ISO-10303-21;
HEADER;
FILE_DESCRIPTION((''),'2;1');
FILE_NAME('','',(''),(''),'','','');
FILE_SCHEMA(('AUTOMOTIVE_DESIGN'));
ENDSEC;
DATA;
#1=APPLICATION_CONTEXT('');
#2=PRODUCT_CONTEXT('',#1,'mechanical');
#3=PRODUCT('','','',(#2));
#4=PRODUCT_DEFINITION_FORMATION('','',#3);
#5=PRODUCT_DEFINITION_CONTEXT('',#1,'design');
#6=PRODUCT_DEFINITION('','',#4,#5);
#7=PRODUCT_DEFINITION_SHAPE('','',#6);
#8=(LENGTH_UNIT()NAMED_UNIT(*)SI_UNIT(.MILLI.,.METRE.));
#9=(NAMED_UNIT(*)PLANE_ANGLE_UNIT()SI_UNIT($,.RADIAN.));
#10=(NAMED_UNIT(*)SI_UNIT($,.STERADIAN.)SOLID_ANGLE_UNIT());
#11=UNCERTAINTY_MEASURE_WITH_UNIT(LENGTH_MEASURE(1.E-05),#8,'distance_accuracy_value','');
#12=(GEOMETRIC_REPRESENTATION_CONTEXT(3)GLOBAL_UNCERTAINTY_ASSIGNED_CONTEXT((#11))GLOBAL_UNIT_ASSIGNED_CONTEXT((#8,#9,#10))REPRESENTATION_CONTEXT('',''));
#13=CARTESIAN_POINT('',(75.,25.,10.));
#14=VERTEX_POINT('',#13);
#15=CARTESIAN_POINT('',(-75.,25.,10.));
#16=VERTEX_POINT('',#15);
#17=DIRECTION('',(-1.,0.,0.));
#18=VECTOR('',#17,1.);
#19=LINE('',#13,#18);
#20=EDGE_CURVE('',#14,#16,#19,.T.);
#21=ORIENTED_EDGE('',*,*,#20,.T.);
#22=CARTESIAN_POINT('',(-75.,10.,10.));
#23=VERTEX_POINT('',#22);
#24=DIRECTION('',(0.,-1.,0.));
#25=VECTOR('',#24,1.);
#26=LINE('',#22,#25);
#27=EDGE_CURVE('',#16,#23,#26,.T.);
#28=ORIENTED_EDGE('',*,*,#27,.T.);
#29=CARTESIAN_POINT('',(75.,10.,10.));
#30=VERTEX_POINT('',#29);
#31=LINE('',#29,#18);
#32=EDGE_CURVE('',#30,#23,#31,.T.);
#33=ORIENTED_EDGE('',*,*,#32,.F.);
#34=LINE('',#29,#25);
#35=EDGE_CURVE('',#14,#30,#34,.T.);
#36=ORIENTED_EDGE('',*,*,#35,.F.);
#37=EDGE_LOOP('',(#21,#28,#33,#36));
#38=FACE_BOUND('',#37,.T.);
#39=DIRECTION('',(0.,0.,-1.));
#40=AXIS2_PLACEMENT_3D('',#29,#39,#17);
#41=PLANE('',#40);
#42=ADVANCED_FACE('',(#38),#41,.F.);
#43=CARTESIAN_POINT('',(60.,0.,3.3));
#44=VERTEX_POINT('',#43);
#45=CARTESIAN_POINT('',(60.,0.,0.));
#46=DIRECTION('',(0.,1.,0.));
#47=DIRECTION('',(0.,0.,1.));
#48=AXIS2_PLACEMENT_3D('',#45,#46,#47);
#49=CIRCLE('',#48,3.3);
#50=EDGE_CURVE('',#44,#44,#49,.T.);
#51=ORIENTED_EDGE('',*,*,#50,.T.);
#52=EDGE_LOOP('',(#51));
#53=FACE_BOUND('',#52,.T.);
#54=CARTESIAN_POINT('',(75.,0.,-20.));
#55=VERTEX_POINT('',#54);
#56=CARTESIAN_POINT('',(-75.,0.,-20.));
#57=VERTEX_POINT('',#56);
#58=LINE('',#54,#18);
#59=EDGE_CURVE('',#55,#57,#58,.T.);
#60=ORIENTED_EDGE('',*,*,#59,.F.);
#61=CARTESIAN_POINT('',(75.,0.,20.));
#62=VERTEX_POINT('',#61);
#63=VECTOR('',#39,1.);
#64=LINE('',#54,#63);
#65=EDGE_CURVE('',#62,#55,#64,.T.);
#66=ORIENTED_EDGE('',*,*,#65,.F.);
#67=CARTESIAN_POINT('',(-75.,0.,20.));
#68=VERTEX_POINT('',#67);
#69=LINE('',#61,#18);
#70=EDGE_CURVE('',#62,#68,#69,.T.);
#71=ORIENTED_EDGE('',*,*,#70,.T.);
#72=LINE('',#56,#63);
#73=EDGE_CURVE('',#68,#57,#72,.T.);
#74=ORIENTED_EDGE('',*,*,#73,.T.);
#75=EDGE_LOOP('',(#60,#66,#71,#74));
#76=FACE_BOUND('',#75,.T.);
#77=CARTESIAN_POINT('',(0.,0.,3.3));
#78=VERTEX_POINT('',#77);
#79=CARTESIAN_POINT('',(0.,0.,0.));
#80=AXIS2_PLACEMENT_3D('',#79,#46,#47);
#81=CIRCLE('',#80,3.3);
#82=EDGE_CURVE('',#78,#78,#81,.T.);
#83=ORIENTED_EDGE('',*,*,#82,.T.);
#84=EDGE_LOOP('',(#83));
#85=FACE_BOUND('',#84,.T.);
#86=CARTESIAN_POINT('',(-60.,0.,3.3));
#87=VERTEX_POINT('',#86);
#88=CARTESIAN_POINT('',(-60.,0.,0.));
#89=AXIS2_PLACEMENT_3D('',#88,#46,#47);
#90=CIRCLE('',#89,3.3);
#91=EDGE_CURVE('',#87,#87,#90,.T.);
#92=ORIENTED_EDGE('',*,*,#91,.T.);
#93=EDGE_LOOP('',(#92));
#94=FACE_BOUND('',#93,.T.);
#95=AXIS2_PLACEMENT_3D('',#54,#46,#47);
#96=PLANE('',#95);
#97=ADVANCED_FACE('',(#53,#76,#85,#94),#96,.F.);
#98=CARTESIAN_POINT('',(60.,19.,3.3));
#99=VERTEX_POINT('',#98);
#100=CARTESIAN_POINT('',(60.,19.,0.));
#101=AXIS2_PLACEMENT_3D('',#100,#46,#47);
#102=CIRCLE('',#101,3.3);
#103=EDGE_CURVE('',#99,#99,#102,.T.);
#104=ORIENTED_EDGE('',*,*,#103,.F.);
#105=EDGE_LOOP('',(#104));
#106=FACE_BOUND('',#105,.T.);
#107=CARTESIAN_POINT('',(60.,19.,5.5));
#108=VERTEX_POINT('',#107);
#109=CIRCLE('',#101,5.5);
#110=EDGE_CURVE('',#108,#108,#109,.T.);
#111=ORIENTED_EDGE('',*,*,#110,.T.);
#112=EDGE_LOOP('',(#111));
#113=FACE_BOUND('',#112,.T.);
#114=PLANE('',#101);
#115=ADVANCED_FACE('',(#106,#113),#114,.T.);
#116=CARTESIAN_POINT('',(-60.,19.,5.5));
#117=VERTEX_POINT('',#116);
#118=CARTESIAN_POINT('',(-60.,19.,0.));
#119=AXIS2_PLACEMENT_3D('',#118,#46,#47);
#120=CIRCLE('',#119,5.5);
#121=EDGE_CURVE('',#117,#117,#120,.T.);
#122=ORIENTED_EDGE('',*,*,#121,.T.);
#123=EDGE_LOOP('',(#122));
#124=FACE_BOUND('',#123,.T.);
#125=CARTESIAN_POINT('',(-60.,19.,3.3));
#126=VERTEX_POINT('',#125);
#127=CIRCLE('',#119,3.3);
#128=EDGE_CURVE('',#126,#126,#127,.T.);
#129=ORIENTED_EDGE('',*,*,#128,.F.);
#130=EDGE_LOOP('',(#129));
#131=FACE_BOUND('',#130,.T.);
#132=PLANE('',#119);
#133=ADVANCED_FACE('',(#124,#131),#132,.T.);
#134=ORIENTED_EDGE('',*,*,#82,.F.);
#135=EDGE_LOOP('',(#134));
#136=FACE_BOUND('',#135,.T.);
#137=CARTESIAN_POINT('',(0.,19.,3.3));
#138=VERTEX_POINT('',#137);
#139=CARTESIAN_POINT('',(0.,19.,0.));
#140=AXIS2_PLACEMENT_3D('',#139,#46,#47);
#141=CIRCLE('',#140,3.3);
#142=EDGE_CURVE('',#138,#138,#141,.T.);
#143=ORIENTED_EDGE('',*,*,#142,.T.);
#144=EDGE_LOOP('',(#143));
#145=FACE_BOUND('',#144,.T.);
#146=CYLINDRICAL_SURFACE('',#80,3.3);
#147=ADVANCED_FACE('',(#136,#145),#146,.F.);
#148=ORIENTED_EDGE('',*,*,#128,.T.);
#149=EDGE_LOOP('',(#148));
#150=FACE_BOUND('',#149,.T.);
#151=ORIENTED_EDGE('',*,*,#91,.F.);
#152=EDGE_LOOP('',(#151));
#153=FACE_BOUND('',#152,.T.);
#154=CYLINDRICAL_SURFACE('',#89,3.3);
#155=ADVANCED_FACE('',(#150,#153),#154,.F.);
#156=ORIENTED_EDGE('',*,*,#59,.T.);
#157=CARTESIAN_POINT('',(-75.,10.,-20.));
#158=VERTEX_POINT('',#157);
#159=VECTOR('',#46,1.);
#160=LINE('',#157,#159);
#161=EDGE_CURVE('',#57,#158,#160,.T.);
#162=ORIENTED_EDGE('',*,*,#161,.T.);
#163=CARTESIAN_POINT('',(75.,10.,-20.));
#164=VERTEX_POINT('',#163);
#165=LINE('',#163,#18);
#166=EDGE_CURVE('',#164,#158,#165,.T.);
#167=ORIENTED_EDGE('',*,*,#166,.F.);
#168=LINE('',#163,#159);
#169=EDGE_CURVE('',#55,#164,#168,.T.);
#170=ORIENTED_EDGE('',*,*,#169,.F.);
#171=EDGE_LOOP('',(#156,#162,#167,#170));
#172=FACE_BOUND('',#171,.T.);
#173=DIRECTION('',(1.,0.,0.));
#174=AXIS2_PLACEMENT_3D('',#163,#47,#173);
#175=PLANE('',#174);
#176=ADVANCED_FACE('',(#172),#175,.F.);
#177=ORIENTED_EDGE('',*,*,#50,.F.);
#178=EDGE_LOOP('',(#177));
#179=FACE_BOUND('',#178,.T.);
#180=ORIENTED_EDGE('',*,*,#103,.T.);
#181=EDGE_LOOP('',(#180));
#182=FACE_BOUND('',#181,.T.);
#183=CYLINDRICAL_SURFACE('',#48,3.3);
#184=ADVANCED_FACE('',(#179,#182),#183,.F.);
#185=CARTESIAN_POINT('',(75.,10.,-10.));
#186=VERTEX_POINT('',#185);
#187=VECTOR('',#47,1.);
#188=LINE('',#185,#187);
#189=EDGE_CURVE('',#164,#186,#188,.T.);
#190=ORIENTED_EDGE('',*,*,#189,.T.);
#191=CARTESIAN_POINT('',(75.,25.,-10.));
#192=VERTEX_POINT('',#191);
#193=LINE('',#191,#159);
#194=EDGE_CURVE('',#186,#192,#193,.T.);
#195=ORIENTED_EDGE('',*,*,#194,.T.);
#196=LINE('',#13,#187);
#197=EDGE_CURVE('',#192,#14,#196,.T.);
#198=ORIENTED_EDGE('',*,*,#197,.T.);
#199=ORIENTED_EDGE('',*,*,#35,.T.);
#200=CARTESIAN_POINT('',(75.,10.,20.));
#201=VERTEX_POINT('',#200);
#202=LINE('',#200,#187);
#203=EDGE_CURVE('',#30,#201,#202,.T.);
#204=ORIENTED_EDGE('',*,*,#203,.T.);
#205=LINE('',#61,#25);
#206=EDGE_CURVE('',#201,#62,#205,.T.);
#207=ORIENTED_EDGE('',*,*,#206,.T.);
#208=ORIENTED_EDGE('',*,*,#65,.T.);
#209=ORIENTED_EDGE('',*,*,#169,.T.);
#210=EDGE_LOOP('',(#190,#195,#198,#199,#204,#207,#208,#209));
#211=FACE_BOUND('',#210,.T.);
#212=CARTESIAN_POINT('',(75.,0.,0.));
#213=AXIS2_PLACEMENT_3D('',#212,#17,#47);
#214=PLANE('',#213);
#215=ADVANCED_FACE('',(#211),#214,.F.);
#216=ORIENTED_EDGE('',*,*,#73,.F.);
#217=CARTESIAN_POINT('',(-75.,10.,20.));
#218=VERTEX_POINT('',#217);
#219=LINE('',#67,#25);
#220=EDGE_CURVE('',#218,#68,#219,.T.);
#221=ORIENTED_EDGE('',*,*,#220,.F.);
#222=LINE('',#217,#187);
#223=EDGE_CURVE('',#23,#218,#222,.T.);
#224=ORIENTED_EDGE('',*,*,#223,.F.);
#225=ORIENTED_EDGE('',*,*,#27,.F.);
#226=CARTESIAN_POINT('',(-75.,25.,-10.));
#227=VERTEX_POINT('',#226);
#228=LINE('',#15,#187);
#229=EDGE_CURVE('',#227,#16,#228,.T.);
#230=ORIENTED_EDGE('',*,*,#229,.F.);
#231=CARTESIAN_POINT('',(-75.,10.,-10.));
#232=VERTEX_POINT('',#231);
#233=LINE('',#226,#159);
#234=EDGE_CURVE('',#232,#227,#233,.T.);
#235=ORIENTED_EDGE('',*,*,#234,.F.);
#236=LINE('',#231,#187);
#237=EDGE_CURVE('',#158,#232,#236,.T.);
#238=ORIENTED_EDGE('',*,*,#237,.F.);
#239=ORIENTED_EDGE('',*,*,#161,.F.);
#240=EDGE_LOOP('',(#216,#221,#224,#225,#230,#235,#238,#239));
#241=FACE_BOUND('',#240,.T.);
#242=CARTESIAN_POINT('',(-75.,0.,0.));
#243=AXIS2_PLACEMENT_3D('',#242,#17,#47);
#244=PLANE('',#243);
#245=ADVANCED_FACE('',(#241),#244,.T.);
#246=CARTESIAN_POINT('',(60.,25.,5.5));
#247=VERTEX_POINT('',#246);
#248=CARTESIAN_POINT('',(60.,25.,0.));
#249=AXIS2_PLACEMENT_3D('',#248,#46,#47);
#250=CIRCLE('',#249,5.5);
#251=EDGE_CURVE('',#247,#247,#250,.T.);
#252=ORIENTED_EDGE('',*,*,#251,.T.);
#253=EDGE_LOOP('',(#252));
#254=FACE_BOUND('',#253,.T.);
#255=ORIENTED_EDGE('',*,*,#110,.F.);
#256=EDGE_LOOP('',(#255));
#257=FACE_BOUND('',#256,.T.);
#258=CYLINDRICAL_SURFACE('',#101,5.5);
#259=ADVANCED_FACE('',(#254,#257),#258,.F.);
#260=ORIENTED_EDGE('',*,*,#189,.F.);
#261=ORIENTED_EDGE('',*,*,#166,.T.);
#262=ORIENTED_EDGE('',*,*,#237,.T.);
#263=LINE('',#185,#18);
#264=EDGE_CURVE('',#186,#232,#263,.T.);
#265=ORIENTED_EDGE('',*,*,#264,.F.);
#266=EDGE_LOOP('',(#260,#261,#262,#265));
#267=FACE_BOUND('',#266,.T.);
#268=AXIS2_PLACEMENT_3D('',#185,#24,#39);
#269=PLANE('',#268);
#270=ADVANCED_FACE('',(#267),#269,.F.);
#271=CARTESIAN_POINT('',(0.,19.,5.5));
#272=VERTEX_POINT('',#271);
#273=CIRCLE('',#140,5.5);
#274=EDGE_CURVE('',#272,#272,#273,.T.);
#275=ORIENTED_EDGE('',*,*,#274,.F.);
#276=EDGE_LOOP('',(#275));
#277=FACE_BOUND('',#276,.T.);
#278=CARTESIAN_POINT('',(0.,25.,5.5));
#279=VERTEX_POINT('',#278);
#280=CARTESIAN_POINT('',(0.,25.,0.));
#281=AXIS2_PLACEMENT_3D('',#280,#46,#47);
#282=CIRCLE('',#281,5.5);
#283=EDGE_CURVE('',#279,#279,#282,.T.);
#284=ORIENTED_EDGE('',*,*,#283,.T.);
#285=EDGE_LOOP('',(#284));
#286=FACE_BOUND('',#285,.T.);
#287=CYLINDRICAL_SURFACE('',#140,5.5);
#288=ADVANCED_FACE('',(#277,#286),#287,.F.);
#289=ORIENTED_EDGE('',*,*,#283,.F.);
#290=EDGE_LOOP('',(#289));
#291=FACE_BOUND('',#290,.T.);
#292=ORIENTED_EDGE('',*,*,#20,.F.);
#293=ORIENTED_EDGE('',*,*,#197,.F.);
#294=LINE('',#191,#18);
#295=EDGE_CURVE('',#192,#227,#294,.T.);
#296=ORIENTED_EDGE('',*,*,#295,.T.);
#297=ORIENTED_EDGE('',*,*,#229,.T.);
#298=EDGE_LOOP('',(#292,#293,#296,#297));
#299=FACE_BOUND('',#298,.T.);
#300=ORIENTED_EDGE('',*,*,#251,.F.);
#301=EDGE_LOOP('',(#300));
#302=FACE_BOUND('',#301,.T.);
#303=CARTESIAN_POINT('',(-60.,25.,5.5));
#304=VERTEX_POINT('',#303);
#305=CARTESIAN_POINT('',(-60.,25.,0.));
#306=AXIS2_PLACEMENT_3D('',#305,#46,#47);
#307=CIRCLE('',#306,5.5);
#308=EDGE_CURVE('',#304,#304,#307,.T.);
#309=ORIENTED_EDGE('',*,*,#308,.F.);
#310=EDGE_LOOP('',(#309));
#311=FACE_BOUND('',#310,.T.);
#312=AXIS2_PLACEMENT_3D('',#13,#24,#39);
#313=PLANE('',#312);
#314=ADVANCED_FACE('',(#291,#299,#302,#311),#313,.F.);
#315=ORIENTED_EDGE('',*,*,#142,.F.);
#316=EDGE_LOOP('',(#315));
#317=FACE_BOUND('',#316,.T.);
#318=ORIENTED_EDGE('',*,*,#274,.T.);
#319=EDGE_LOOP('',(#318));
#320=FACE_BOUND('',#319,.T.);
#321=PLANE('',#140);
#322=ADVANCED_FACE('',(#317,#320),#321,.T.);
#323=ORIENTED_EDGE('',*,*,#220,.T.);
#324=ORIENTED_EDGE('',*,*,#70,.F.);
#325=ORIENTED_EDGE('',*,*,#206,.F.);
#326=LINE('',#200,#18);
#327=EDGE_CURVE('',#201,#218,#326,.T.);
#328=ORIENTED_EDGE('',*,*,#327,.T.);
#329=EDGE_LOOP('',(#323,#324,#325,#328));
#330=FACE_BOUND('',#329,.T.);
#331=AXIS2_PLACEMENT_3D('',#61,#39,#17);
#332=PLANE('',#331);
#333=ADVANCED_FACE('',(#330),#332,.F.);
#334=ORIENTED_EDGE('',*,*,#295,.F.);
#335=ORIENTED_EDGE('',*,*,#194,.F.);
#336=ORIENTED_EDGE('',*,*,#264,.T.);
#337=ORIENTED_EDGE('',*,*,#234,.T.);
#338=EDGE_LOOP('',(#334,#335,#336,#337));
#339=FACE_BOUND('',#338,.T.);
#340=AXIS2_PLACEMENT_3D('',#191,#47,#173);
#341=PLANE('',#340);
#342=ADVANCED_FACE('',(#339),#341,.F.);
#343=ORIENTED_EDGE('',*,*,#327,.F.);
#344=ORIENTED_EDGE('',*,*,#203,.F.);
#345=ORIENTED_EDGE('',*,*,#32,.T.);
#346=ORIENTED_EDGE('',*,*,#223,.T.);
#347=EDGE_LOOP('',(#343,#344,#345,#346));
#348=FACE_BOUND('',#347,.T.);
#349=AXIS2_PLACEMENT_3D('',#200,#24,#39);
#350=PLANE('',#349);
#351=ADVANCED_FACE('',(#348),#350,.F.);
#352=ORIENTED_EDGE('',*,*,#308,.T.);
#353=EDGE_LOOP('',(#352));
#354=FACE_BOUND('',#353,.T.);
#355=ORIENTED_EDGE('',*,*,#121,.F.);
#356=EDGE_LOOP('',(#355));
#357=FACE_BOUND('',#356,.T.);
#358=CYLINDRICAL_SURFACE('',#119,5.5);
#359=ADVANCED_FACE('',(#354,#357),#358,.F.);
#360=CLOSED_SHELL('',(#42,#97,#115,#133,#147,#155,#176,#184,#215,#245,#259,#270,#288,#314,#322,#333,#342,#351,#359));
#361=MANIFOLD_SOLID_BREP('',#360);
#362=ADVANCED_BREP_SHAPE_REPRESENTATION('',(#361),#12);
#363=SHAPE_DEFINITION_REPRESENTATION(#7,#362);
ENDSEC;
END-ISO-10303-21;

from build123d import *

# Parameters (mm, degrees)
EXTRUDE_START       = -75
EXTRUDE_1_DEPTH     = 150
SKETCH_2_R          = 5.5
CUT_EXTRUDE_1_DEPTH = 6
SKETCH_3_R          = 3.3
CUT_EXTRUDE_2_DEPTH = 82.547532152


# Read off the part's stored shape, not the designer's step: 凸台-拉伸1
with BuildPart() as part:
    # 凸台-拉伸1 outline → 凸台-拉伸1 (new body)
    with BuildSketch(Plane(origin=(0, 0, 0), x_dir=(0, 0, -1), z_dir=(1, 0, 0)).offset(EXTRUDE_START)):
        Polygon((20, 0), (20, 10), (10, 10), (10, 25), (-10, 25), (-10, 10), (-20, 10), (-20, 0), align=None)
    extrude(amount=EXTRUDE_1_DEPTH)

    # 草图2 → 切除-拉伸1 (cut)
    with BuildSketch(Plane(origin=(0, 25, 0), x_dir=(1, 0, 0), z_dir=(0, 1, 0))):
        with Locations(Location((-60, 0, 0), (0, 0, 270))):
            Circle(SKETCH_2_R)
        with Locations(Location((0, 0, 0), (0, 0, 270))):
            Circle(SKETCH_2_R)
        with Locations(Location((60, 0, 0), (0, 0, 270))):
            Circle(SKETCH_2_R)
    extrude(amount=-CUT_EXTRUDE_1_DEPTH, mode=Mode.SUBTRACT)

    # 草图3 → 切除-拉伸2 (cut, through all)
    with BuildSketch(Plane(origin=(0, 25, 0), x_dir=(1, 0, 0), z_dir=(0, 1, 0))):
        with Locations(Location((-60, 0, 0), (0, 0, 270))):
            Circle(SKETCH_3_R)
        with Locations(Location((0, 0, 0), (0, 0, 270))):
            Circle(SKETCH_3_R)
        with Locations(Location((60, 0, 0), (0, 0, 270))):
            Circle(SKETCH_3_R)
    extrude(amount=-CUT_EXTRUDE_2_DEPTH, mode=Mode.SUBTRACT)


solid = part.part
